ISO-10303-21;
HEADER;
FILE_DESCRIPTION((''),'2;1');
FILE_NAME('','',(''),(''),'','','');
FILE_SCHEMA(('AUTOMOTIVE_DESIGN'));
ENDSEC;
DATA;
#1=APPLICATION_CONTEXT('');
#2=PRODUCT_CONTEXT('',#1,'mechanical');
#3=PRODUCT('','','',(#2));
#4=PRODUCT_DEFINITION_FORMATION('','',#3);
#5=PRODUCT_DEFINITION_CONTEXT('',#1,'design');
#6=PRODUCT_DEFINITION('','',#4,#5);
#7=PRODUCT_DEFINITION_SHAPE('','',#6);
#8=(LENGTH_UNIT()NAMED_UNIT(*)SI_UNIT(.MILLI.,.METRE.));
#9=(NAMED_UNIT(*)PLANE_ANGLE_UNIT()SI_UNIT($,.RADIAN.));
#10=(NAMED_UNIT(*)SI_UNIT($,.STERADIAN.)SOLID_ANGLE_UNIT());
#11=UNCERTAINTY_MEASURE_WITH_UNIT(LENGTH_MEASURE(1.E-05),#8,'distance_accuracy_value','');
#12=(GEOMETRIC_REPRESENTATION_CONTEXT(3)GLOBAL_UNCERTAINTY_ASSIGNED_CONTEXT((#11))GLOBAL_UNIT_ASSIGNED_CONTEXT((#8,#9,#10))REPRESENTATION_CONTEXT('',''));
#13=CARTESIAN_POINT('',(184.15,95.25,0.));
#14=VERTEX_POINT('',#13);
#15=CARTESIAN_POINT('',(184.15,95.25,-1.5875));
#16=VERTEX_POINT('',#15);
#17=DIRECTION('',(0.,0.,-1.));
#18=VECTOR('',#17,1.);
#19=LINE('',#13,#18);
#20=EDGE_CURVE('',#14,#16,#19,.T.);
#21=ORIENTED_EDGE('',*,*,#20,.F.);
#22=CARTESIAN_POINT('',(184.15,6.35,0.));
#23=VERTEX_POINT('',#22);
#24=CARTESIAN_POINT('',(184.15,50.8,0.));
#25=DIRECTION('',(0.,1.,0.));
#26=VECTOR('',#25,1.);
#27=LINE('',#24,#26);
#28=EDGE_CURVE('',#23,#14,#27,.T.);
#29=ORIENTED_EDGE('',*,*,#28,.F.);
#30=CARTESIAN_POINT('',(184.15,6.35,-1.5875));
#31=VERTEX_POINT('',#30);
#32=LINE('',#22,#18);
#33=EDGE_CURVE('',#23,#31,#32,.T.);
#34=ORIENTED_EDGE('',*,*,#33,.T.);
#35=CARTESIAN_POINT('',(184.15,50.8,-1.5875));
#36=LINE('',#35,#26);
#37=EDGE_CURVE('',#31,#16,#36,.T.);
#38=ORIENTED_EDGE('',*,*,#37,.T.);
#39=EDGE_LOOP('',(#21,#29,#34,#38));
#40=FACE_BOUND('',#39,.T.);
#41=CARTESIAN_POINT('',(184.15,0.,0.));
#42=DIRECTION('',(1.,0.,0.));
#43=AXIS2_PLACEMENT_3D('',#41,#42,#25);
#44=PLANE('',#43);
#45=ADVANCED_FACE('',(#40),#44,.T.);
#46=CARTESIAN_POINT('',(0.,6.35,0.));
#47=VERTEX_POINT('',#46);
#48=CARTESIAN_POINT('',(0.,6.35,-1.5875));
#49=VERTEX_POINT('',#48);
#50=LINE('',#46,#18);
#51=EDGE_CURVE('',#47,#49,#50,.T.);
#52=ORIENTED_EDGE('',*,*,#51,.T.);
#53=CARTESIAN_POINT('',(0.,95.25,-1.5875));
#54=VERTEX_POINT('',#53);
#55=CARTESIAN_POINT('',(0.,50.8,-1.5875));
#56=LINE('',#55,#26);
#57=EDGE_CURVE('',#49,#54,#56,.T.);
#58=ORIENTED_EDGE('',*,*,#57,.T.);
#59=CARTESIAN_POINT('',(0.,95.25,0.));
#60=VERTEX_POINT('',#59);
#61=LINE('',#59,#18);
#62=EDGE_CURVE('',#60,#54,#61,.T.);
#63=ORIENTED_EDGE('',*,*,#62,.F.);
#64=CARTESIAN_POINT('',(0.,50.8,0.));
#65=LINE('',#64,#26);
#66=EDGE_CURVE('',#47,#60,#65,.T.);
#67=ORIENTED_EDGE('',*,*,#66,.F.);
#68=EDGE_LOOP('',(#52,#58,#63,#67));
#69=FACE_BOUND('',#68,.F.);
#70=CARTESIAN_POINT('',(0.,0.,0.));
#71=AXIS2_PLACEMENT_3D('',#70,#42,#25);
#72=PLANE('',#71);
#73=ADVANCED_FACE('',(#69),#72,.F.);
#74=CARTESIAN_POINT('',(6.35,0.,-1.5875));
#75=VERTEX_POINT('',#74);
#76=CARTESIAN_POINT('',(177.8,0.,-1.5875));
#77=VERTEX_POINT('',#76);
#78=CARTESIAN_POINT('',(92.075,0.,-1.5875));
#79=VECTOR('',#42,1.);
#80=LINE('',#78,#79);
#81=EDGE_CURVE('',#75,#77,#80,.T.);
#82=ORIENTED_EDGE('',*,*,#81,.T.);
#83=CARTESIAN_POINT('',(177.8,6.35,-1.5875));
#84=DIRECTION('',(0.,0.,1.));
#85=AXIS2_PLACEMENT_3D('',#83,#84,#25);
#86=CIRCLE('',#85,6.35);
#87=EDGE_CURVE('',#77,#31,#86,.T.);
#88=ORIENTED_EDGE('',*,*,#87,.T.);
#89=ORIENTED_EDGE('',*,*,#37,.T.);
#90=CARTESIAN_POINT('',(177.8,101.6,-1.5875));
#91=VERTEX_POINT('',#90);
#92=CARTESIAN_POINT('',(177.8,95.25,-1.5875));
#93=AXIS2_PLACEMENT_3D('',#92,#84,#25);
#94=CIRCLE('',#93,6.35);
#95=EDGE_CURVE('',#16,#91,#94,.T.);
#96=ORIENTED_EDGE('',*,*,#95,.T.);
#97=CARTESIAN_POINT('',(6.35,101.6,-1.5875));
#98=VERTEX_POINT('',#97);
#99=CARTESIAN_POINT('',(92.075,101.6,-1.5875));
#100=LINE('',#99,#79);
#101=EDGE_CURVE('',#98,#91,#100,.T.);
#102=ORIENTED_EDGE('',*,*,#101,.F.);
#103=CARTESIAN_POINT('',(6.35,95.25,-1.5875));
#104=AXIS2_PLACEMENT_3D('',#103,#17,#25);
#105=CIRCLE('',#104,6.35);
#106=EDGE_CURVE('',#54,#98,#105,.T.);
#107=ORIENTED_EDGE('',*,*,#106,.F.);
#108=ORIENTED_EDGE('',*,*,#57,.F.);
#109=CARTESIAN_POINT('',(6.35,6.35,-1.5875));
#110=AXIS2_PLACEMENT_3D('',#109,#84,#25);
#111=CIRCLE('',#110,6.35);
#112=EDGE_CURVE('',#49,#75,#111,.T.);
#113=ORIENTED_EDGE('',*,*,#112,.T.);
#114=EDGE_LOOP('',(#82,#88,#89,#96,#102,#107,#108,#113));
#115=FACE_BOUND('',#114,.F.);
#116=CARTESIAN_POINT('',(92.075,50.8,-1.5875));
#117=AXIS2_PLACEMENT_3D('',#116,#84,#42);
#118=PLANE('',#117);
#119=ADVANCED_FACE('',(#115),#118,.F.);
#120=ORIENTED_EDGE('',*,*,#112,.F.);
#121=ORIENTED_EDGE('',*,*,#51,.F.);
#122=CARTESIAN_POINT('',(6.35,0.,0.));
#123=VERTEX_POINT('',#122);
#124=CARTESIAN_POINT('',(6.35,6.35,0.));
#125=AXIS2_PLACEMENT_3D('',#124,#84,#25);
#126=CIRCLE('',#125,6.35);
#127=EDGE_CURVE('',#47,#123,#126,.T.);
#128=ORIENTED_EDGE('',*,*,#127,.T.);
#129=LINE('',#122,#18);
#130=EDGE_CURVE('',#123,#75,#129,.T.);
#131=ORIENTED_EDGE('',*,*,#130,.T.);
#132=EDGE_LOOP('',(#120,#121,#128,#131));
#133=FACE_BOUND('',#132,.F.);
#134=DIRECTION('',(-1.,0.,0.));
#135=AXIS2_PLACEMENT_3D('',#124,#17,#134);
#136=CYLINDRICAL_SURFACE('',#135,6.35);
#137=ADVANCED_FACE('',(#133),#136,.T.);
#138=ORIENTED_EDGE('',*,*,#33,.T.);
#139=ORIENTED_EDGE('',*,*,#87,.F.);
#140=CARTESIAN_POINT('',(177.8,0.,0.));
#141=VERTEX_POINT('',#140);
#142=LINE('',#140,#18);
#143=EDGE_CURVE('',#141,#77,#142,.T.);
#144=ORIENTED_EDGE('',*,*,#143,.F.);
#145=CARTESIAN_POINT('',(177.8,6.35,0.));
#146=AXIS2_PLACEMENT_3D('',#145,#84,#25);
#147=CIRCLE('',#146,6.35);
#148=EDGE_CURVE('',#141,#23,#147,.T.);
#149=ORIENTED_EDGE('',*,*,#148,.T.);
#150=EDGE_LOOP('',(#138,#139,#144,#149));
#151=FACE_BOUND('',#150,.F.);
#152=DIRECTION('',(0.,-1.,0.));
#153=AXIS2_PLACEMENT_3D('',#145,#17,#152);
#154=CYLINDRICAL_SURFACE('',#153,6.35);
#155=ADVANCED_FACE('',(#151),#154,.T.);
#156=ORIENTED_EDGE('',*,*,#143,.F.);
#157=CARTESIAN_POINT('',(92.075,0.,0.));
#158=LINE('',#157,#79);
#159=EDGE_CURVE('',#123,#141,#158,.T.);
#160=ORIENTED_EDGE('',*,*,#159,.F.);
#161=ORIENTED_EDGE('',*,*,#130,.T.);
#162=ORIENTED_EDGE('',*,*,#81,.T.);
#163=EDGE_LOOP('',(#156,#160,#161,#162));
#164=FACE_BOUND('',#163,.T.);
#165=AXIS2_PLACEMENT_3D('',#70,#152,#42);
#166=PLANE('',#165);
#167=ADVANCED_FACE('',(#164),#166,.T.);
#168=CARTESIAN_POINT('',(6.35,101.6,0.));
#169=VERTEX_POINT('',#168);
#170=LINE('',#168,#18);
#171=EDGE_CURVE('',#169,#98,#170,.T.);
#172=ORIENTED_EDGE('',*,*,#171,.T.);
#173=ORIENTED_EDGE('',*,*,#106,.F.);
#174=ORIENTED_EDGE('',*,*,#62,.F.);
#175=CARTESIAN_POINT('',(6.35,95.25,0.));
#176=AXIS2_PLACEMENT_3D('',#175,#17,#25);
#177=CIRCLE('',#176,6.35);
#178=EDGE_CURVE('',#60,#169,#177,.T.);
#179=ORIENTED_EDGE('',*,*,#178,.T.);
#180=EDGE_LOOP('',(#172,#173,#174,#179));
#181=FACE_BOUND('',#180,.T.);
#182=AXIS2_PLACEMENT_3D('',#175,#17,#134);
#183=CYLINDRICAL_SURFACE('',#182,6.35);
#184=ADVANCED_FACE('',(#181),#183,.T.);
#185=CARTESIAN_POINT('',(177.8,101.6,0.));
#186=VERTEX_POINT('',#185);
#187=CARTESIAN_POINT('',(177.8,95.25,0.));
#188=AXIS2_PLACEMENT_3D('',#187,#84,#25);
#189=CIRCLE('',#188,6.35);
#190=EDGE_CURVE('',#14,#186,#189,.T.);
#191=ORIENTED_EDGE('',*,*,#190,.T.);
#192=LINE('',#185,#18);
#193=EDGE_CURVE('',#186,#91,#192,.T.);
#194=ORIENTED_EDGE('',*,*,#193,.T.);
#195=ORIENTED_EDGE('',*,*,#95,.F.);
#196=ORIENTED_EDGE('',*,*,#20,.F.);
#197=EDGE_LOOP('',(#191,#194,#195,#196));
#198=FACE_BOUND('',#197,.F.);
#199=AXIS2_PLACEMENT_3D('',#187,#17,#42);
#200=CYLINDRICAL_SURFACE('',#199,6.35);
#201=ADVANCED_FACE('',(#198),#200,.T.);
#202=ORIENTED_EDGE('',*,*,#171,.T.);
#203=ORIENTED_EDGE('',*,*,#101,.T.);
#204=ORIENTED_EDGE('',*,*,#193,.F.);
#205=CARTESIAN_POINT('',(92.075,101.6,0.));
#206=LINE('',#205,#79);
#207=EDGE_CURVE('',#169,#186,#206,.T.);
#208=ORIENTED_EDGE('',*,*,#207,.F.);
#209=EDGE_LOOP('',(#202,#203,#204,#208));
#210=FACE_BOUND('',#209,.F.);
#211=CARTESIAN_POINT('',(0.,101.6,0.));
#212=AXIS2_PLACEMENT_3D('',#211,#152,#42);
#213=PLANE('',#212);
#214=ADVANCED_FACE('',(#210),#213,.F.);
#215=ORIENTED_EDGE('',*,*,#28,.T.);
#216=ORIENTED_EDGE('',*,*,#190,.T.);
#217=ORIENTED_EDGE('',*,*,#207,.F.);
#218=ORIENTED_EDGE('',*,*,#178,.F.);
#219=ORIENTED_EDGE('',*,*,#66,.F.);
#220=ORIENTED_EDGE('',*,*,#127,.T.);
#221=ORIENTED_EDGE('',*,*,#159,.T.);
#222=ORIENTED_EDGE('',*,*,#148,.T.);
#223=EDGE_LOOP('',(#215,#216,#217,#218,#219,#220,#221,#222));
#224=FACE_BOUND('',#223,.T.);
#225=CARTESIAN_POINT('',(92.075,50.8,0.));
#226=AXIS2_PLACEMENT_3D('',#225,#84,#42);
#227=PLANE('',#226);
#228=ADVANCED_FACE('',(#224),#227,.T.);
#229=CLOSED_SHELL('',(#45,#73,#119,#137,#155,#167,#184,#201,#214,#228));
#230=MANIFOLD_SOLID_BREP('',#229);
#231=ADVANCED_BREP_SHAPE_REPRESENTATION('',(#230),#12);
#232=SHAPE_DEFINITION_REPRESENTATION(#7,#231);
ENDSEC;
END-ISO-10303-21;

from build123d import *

# Parameters (mm, degrees)
F0_W     = 184.15
F0_H     = 101.6
F1_DEPTH = 1.5875
F2_R     = 6.35


# Not quite as in the source:
# - a length typed as a fraction of an inch, garbled in the dataset ("3 / 203.2 mm" for 3/8 in), is restored


with BuildPart() as f1:
    # F0 (on Top) → F1 (new body)
    with BuildSketch(Plane.XY):
        with Locations((92.075, 50.8)):
            Rectangle(F0_W, F0_H)
    extrude(amount=-F1_DEPTH)

    # F2
    f2_edges = [f1.edges().sort_by_distance(p)[0] for p in [
        (0, 101.6, -0.79375),
        (0, 0, -0.79375),
        (184.15, 0, -0.79375),
        (184.15, 101.6, -0.79375),
    ]]
    fillet(f2_edges, radius=F2_R)


solid = f1.part
